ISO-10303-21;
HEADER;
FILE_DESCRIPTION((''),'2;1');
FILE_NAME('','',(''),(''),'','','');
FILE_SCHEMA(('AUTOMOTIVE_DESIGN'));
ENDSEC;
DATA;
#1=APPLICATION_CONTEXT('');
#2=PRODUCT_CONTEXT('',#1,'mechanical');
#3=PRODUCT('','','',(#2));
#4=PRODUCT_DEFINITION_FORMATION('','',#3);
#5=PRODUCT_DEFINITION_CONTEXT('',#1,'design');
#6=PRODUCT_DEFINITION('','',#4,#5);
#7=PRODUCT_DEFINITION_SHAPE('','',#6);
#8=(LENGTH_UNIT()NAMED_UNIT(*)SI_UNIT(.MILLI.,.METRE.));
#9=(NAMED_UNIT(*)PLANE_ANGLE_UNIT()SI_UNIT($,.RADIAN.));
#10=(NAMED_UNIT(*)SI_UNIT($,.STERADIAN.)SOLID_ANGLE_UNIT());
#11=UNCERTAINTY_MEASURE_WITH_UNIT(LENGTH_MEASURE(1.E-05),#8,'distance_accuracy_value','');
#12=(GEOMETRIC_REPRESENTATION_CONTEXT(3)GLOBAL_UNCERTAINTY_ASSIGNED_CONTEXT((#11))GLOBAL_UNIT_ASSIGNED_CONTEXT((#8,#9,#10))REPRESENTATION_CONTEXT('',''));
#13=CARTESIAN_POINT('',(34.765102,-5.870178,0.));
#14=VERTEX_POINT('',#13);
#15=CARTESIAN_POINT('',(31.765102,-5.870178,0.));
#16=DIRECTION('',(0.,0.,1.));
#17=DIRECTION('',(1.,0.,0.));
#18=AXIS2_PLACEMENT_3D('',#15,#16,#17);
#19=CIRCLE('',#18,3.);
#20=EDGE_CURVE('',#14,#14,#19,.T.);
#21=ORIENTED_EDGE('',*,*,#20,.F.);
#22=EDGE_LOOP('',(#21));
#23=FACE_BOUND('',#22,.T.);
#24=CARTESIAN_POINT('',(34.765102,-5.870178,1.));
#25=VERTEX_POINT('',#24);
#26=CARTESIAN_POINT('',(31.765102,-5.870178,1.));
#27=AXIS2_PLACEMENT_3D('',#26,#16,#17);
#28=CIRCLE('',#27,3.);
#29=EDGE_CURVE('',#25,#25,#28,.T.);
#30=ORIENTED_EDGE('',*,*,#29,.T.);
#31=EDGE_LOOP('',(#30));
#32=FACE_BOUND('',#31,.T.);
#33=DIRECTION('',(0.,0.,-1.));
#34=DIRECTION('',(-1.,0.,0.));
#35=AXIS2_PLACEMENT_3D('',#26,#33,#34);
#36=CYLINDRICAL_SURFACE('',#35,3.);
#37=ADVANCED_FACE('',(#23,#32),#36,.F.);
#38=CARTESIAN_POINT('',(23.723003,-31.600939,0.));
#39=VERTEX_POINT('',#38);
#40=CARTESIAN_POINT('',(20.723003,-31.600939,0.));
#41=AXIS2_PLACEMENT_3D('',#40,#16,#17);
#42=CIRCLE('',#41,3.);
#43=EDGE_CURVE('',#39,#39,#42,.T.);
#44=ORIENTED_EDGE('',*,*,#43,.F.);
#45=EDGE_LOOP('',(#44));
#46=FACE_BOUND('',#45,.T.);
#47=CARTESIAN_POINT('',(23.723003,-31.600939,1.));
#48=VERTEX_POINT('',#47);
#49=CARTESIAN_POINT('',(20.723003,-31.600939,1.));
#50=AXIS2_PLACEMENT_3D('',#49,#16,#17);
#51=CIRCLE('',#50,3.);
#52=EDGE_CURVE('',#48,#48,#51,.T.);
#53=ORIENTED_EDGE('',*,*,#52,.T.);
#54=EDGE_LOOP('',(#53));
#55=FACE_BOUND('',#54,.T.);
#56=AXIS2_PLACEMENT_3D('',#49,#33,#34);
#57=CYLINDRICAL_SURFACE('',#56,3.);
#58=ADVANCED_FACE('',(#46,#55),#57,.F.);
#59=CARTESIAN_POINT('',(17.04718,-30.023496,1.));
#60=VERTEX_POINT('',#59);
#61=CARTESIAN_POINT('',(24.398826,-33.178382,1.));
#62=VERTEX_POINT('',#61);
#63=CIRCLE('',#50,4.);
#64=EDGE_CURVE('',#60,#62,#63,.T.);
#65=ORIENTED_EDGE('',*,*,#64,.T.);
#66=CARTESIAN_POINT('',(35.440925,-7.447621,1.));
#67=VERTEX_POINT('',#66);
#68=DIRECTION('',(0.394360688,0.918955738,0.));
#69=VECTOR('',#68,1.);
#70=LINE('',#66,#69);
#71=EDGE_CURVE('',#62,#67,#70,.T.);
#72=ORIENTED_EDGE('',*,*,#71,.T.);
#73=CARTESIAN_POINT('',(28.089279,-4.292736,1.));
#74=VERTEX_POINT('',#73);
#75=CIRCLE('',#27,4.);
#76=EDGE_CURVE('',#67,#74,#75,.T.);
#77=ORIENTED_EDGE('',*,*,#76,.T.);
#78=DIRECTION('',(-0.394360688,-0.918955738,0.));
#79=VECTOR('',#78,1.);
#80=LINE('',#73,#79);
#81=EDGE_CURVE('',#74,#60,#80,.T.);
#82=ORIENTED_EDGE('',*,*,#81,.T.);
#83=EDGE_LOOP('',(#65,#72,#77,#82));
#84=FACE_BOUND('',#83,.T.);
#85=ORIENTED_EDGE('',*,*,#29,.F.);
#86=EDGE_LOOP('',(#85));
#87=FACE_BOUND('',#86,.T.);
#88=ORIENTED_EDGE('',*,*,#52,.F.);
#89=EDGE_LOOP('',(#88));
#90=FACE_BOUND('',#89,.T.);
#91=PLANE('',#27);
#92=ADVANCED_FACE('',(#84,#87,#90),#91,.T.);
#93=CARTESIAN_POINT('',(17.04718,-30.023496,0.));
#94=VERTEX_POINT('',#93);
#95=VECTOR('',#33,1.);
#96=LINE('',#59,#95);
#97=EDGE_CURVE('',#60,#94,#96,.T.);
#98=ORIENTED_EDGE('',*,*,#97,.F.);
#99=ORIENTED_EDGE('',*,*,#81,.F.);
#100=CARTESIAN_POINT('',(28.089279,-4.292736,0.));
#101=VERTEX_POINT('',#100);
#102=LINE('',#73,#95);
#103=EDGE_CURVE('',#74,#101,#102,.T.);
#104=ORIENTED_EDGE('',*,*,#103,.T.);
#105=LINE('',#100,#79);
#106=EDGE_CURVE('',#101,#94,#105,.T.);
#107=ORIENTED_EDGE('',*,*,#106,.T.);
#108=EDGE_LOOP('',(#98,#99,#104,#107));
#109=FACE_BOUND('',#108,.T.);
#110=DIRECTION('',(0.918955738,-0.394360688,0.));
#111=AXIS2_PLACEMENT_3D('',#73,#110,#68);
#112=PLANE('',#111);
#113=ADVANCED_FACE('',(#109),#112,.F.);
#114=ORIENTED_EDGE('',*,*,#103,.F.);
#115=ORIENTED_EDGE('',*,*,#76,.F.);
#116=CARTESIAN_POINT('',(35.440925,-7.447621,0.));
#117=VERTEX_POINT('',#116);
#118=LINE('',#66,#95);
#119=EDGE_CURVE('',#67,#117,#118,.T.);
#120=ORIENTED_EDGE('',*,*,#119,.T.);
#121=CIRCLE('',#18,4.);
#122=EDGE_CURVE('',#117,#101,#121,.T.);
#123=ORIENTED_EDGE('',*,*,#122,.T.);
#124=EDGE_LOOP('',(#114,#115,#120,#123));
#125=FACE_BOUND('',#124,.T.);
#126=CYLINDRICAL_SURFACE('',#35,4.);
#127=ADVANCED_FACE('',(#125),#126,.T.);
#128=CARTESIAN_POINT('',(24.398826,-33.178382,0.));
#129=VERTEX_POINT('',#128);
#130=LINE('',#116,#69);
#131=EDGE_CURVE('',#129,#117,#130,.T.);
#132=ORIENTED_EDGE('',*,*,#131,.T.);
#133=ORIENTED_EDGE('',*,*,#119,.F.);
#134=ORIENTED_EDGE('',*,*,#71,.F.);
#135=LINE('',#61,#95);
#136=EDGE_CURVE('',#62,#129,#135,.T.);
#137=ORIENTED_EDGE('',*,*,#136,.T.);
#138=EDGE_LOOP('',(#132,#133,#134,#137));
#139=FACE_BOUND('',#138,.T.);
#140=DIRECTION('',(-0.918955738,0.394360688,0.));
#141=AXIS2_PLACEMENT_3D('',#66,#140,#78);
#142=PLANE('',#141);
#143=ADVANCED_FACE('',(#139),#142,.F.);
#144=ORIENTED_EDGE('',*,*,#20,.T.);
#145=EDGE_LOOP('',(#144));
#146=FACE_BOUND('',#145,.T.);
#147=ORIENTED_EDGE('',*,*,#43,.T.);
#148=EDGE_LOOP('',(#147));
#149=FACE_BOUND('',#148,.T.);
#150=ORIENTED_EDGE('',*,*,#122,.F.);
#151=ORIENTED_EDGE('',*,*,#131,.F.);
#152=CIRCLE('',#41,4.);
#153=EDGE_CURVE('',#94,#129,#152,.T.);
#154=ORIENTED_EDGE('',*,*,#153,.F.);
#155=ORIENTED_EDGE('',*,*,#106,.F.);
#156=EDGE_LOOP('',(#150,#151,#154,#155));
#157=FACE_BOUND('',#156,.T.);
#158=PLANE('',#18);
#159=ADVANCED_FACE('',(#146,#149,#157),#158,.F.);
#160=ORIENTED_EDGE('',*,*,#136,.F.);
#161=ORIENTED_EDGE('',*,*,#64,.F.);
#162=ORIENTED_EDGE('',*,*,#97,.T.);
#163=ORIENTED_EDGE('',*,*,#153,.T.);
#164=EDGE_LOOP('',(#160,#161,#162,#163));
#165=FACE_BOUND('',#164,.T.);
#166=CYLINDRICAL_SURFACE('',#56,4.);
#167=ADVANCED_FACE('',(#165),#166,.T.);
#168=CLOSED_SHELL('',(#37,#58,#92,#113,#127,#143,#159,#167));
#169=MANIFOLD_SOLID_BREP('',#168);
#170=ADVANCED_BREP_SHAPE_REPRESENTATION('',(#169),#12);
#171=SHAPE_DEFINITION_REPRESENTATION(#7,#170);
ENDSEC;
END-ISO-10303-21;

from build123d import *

# Parameters (mm, degrees)
ESQUISSE1_R               = 3
T_LE_DE_BASE_PLI_E1_DEPTH = 1


# Sheet-metal steps are written as plain solids
with BuildPart() as part:
    # Esquisse1 → Tôle de base pliée1 (new body)
    with BuildSketch(Plane.XY):
        with BuildLine():
            Line((35.440925163, -7.447621231), (24.398825897, -33.178381884))
            ThreePointArc((24.398825897, -33.178381884), (19.145560194, -35.276762083), (17.047179996, -30.02349638))
            Line((17.047179996, -30.02349638), (28.089279262, -4.292735726))
            ThreePointArc((28.089279262, -4.292735726), (33.342544964, -2.194355528), (35.440925163, -7.447621231))
        make_face()
        with Locations((31.765102212, -5.870178479)):
            Circle(ESQUISSE1_R, mode=Mode.SUBTRACT)
        with Locations((20.723002946, -31.600939132)):
            Circle(ESQUISSE1_R, mode=Mode.SUBTRACT)
    extrude(amount=T_LE_DE_BASE_PLI_E1_DEPTH)


solid = part.part
